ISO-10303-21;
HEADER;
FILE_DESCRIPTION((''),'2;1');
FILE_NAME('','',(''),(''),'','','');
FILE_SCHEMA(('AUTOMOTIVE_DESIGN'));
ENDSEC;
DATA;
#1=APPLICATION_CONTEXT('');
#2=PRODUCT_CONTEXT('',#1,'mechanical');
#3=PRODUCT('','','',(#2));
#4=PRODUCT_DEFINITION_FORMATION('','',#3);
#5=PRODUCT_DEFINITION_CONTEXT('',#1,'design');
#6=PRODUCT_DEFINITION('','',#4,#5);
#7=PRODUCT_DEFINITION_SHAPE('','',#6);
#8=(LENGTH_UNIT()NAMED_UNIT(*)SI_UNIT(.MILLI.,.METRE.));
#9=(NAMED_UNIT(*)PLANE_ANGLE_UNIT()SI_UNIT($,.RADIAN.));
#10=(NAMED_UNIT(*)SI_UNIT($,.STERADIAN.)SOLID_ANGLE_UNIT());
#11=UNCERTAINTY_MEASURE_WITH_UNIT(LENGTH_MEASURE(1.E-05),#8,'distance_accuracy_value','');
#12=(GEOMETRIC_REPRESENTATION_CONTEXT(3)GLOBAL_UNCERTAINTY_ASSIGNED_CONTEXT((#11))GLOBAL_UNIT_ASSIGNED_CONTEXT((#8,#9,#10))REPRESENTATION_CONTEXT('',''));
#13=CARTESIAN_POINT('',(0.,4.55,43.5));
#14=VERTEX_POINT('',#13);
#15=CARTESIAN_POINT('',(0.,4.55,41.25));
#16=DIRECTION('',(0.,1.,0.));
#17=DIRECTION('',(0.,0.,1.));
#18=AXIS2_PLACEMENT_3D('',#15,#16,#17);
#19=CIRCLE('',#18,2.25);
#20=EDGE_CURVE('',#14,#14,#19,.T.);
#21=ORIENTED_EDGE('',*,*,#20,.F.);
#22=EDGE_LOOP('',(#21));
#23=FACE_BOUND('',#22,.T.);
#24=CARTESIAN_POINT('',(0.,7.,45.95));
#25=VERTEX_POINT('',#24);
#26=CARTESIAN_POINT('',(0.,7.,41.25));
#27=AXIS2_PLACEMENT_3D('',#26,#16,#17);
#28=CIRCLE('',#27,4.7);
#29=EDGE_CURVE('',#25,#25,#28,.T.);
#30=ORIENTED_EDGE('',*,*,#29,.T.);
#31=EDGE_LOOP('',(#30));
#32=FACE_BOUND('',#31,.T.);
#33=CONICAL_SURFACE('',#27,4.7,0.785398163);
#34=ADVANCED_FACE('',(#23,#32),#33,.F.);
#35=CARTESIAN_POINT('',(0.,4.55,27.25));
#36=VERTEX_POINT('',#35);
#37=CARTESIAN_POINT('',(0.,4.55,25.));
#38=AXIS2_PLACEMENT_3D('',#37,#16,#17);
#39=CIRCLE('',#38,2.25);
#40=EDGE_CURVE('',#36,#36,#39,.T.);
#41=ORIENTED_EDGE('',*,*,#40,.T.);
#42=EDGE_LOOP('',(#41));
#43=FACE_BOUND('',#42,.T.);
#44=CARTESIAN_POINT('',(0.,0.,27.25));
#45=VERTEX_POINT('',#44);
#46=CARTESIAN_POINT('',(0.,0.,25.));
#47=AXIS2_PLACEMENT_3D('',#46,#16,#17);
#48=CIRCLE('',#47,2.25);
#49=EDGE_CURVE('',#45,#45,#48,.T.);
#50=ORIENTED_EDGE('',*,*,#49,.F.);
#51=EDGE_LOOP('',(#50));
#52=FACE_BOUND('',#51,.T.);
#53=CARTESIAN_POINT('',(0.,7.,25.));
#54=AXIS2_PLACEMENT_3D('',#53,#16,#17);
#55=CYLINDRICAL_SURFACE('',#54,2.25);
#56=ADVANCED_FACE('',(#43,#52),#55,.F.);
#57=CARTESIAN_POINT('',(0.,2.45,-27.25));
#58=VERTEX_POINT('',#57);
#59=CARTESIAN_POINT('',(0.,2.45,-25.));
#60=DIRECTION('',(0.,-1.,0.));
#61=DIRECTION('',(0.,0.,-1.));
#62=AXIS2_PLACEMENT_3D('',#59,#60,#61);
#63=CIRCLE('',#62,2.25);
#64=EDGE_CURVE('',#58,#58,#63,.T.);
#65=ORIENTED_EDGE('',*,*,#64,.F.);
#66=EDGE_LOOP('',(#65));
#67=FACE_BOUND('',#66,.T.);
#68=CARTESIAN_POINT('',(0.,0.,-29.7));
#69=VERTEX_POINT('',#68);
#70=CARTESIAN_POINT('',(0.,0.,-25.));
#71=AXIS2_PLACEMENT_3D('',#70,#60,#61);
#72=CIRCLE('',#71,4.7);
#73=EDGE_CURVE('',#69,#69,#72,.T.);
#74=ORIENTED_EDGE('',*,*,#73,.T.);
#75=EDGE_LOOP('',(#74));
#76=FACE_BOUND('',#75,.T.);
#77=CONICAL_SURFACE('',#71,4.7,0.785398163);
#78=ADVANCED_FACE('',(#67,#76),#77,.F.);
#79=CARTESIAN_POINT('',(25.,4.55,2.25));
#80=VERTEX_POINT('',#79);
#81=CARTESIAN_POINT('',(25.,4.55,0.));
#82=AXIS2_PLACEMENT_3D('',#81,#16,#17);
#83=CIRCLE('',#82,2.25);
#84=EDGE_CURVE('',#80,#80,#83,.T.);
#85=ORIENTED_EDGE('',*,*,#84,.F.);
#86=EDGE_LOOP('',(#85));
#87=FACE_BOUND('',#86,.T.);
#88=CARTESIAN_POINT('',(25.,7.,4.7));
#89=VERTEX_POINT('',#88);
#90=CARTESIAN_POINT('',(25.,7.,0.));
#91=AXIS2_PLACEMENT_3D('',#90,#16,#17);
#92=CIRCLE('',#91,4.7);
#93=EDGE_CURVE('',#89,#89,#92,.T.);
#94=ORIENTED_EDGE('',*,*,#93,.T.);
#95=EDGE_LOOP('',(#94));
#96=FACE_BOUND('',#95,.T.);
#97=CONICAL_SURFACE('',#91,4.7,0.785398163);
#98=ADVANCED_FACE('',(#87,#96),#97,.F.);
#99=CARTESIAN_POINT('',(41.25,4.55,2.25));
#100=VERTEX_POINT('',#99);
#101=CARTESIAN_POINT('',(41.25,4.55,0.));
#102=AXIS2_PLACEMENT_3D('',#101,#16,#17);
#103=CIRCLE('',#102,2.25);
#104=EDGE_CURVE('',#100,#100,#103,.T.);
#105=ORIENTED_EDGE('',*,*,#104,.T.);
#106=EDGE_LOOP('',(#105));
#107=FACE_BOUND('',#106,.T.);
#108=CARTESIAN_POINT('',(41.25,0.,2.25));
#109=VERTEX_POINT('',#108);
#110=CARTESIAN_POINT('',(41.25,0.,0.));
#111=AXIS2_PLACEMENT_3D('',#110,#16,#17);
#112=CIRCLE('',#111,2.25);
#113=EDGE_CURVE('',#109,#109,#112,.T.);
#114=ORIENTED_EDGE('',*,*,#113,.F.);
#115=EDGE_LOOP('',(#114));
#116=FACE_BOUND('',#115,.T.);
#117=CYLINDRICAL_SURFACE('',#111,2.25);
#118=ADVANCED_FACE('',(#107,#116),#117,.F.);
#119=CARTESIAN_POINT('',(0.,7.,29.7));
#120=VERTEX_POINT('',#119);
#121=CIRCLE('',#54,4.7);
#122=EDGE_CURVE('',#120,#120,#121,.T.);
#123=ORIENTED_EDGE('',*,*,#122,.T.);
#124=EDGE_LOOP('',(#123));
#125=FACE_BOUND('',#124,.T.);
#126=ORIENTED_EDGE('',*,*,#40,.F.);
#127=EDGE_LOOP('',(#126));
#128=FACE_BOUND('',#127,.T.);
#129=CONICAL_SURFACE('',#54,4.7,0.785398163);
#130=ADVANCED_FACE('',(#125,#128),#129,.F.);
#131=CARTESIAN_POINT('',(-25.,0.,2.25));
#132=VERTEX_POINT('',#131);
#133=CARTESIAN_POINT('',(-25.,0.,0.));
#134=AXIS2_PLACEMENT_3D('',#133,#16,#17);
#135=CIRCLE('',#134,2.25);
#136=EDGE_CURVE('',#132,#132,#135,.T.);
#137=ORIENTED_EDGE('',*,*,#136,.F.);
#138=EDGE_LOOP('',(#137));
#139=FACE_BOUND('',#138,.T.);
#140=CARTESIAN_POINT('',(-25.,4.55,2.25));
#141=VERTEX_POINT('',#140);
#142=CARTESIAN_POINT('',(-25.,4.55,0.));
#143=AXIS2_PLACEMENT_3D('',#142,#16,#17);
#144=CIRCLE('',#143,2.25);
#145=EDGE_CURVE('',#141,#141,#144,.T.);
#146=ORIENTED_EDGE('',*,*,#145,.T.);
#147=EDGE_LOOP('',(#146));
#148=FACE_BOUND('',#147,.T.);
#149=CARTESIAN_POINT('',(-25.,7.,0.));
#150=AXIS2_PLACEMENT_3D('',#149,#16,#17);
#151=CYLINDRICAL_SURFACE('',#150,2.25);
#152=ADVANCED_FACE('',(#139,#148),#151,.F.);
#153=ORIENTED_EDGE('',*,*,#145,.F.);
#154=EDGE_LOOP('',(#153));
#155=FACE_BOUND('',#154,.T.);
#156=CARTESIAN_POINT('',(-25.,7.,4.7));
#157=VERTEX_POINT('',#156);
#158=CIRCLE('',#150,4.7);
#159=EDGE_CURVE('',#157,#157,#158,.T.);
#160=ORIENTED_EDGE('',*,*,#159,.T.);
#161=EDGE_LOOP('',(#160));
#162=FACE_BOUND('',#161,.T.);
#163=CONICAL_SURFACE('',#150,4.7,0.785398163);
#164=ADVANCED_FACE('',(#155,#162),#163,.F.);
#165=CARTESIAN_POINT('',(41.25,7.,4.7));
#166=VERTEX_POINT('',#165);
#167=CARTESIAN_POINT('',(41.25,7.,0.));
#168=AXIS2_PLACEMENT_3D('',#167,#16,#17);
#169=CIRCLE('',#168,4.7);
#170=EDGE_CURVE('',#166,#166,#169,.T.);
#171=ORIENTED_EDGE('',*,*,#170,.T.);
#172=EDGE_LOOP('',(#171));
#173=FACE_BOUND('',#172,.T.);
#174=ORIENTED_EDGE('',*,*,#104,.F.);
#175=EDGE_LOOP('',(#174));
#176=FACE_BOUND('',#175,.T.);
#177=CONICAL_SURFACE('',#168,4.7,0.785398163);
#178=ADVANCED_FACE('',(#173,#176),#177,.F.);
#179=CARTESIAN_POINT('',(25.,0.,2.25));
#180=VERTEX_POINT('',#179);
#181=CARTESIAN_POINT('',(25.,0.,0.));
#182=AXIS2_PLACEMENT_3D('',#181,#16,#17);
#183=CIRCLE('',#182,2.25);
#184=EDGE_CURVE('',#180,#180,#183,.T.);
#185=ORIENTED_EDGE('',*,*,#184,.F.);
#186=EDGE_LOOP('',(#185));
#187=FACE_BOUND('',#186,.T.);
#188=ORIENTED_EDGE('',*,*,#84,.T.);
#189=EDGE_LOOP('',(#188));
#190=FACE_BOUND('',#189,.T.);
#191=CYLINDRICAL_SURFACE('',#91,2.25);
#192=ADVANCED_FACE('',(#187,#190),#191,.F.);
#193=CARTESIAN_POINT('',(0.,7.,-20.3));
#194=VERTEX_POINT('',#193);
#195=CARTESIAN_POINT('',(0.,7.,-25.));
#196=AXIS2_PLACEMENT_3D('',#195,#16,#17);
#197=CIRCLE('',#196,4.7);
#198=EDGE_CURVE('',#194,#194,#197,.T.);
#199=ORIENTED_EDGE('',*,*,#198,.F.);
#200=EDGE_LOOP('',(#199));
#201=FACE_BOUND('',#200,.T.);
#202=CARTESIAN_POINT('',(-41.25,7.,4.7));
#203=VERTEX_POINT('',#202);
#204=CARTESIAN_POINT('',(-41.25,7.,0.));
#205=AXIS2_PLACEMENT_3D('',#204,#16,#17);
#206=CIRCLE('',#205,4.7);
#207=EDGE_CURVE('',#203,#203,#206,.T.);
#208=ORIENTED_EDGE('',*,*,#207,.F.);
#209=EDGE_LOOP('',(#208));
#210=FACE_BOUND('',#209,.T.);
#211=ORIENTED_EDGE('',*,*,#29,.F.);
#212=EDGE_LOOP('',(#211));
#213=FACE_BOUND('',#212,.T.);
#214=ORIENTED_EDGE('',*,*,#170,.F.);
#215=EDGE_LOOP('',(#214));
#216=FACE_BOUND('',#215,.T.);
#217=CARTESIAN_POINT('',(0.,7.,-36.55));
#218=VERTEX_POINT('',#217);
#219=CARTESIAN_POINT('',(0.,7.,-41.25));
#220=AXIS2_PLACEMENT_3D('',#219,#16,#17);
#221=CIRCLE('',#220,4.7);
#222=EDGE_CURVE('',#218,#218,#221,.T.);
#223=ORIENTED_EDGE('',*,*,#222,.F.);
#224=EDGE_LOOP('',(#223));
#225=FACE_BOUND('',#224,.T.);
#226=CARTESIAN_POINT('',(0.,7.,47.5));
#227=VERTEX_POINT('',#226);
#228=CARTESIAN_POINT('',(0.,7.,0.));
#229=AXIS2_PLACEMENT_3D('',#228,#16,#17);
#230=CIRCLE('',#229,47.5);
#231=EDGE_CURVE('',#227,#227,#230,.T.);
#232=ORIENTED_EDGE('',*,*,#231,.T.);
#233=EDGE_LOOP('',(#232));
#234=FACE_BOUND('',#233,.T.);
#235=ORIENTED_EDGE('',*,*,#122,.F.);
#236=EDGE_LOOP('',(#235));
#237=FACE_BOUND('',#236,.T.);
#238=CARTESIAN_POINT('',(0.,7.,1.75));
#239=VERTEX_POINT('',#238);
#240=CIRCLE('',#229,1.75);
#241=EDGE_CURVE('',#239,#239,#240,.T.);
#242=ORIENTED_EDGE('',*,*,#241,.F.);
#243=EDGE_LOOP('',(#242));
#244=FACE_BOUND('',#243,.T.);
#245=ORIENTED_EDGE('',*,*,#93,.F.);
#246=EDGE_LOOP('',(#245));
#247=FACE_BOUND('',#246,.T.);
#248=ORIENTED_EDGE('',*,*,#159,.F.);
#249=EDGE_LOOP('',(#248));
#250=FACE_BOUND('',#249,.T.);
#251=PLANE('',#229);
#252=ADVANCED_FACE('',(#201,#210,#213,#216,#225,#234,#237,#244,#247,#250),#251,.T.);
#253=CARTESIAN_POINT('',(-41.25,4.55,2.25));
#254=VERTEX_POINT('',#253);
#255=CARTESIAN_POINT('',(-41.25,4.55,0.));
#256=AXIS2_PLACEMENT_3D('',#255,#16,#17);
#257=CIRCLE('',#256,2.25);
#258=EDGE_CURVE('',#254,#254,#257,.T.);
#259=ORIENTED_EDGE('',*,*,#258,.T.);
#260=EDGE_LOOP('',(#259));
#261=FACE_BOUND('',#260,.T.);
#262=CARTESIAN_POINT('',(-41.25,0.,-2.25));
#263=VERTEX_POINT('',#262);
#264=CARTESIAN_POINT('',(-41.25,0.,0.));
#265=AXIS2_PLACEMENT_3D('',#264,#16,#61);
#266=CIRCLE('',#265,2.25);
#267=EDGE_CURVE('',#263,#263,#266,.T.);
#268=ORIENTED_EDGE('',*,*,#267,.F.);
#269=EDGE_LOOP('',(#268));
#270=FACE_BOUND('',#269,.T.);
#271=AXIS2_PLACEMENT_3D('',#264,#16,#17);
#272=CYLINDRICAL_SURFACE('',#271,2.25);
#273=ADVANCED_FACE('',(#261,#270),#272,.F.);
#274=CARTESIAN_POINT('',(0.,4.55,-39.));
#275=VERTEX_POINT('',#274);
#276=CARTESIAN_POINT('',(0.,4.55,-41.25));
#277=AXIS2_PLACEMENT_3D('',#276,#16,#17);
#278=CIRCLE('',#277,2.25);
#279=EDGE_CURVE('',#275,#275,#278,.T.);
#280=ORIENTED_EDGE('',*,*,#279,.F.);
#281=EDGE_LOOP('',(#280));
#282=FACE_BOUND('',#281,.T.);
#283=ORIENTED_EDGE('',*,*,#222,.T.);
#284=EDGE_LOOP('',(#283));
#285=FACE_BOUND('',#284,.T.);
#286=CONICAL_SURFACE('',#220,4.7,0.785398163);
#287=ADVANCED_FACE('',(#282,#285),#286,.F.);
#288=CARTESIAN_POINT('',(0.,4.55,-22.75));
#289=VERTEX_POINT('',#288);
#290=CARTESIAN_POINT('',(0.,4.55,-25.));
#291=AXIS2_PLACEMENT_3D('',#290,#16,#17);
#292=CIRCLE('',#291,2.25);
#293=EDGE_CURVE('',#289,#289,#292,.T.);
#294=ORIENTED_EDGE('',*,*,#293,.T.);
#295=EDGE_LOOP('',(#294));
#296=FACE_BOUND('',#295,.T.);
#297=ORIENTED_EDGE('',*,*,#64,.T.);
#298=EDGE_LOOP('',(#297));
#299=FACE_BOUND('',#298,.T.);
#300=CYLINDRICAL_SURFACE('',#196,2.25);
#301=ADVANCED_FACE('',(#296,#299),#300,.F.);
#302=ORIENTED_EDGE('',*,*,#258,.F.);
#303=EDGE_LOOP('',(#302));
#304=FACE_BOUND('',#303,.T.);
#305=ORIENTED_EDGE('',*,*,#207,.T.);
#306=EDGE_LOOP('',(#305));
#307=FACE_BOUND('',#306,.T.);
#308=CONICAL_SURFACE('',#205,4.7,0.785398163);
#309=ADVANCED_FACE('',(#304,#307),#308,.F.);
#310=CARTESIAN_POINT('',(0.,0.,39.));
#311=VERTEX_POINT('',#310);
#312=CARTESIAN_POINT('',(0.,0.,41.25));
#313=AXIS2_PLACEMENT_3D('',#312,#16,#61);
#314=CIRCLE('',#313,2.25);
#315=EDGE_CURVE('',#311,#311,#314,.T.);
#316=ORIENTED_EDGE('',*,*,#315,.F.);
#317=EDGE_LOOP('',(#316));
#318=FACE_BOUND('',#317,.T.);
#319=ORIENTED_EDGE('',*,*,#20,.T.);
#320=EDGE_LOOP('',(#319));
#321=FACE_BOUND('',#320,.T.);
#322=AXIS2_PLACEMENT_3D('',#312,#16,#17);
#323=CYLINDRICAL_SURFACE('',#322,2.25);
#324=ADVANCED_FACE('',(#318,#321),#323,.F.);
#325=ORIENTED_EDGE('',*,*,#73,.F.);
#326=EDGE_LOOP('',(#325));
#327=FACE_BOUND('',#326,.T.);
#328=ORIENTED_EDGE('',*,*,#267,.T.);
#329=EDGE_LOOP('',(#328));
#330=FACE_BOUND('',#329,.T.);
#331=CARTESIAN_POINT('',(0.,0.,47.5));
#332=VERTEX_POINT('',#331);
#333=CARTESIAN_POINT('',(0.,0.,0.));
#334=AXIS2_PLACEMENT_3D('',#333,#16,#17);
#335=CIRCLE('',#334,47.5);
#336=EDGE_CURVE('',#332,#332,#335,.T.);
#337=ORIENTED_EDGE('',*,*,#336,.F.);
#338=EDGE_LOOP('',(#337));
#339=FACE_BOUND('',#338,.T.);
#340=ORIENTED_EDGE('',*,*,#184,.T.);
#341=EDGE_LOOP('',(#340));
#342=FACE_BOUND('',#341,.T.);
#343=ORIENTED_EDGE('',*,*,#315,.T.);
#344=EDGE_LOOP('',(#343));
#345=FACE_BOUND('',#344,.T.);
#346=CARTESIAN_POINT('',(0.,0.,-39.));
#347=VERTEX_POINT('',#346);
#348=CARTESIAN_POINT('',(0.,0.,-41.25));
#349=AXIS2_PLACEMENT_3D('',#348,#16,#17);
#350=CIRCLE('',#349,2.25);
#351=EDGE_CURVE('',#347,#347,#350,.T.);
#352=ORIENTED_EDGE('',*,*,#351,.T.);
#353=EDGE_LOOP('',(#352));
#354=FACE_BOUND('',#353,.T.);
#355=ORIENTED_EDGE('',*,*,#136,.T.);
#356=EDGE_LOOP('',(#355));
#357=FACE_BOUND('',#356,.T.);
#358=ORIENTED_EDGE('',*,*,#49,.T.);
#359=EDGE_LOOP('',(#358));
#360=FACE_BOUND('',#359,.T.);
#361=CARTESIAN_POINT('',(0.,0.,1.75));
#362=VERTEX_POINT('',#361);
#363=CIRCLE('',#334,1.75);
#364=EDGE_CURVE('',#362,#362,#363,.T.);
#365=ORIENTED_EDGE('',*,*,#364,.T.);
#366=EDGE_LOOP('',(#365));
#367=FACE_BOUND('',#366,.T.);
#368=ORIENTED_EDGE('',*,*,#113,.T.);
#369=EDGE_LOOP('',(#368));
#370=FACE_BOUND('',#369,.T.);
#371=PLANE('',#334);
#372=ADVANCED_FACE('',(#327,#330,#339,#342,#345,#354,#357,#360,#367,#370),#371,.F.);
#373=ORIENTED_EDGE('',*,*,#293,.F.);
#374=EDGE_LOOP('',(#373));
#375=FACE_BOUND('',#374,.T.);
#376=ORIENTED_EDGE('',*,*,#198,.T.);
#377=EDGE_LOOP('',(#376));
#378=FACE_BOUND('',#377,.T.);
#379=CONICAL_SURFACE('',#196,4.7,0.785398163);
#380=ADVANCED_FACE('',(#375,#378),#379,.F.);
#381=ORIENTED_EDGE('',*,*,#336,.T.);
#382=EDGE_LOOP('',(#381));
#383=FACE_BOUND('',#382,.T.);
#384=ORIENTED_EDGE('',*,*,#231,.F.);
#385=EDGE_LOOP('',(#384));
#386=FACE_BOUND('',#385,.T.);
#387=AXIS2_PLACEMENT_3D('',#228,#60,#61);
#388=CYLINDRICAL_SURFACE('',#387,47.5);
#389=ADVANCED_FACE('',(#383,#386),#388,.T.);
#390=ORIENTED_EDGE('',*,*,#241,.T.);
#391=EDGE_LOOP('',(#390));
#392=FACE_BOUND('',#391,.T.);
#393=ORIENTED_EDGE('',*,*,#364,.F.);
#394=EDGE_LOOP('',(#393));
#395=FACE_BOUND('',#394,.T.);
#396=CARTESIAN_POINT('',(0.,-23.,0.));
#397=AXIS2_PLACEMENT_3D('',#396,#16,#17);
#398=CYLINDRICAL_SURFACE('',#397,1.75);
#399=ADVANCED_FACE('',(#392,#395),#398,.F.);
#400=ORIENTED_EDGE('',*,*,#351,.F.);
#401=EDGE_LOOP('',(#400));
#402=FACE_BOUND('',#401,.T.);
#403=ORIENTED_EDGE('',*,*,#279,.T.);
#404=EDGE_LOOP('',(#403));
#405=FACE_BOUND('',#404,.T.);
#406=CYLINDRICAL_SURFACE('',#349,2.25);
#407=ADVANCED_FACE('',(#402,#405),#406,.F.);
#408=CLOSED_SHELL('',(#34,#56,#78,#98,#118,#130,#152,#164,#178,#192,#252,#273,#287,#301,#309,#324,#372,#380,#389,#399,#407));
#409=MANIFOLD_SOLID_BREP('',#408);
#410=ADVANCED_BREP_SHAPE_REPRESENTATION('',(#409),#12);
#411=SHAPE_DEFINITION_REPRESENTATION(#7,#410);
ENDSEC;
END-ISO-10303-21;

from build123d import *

# Parameters (mm, degrees)
SKETCH1_R                                           = 47.5
SKETCH1_R_2                                         = 35
BOSS_EXTRUDE1_DEPTH                                 = 7
SKETCH2_R                                           = 2.25
SKETCH2_R_2                                         = 1.75
CUT_EXTRUDE1_DEPTH                                  = 68.538877693
CSK_FOR_M4_COUNTERSUNK_FLAT_HEAD_SCREW1_D           = 4.5
CSK_FOR_M4_COUNTERSUNK_FLAT_HEAD_SCREW1_CSINK_D     = 9.4
CSK_FOR_M4_COUNTERSUNK_FLAT_HEAD_SCREW1_CSINK_ANGLE = 90
BOSS_EXTRUDE2_START                                 = -7
SKETCH4_R                                           = 35
BOSS_EXTRUDE2_DEPTH                                 = 7
SKETCH6_R                                           = 1.75
CUT_EXTRUDE2_DEPTH                                  = 30
SKETCH2_2_R                                         = 2.25
SKETCH2_2_R_2                                       = 1.75
CUT_EXTRUDE3_DEPTH                                  = 68.538877693


# Read off the part's stored shape, not the designer's step: CSK for M4 Countersunk Flat Head Screw2
with BuildPart() as part:
    # Sketch1 → Boss-Extrude1 (new body)
    with BuildSketch(Plane(origin=(0, 0, 0), x_dir=(1, 0, 0), z_dir=(0, 1, 0))):
        with Locations(Location((0, 0, 0), (0, 0, 270))):
            Circle(SKETCH1_R)
        with Locations(Location((0, 0, 0), (0, 0, 270))):
            Circle(SKETCH1_R_2, mode=Mode.SUBTRACT)
    extrude(amount=BOSS_EXTRUDE1_DEPTH)

    # Sketch2 → Cut-Extrude1 (cut, through all)
    with BuildSketch(Plane(origin=(0, 7, 0), x_dir=(1, 0, 0), z_dir=(0, 1, 0))):
        with Locations(Location((0, 41.25, 0), (0, 0, 270))):
            Circle(SKETCH2_R)
        with Locations(Location((41.25, 0, 0), (0, 0, 270))):
            Circle(SKETCH2_R)
        with Locations(Location((0, -41.25, 0), (0, 0, 90))):
            Circle(SKETCH2_R)
        with Locations(Location((-41.25, 0, 0), (0, 0, 90))):
            Circle(SKETCH2_R)
        with Locations((0, 25)):
            Circle(SKETCH2_R_2)
        with Locations((25, 0)):
            Circle(SKETCH2_R_2)
        with Locations((0, -25)):
            Circle(SKETCH2_R_2)
        with Locations((-25, 0)):
            Circle(SKETCH2_R_2)
    extrude(amount=-CUT_EXTRUDE1_DEPTH, mode=Mode.SUBTRACT)

    # CSK for M4 Countersunk Flat Head Screw1 (through all)
    with Locations(Plane(origin=(0, 7, 41.25), x_dir=(0, 0, 1), z_dir=(0, 1, 0))):
        with Locations((0, 0), (-41.25, 41.25), (-82.5, 0), (-41.25, -41.25)):
            CounterSinkHole(CSK_FOR_M4_COUNTERSUNK_FLAT_HEAD_SCREW1_D / 2, CSK_FOR_M4_COUNTERSUNK_FLAT_HEAD_SCREW1_CSINK_D / 2, counter_sink_angle=CSK_FOR_M4_COUNTERSUNK_FLAT_HEAD_SCREW1_CSINK_ANGLE)

    # Sketch4 → Boss-Extrude2 (add)
    with BuildSketch(Plane(origin=(0, 7, 0), x_dir=(1, 0, 0), z_dir=(0, 1, 0)).offset(BOSS_EXTRUDE2_START)):
        Circle(SKETCH4_R)
    extrude(amount=BOSS_EXTRUDE2_DEPTH)

    # Sketch6 → Cut-Extrude2 (cut)
    with BuildSketch(Plane(origin=(0, 7, 0), x_dir=(1, 0, 0), z_dir=(0, 1, 0))):
        with Locations(Location((0, 0, 0), (0, 0, 270))):
            Circle(SKETCH6_R)
    extrude(amount=-CUT_EXTRUDE2_DEPTH, mode=Mode.SUBTRACT)

    # Sketch2<2> → Cut-Extrude3 (cut, through all)
    with BuildSketch(Plane(origin=(0, 7, 0), x_dir=(1, 0, 0), z_dir=(0, 1, 0))):
        with Locations(Location((0, 41.25, 0), (0, 0, 270))):
            Circle(SKETCH2_2_R)
        with Locations(Location((41.25, 0, 0), (0, 0, 270))):
            Circle(SKETCH2_2_R)
        with Locations(Location((0, -41.25, 0), (0, 0, 270))):
            Circle(SKETCH2_2_R)
        with Locations(Location((-41.25, 0, 0), (0, 0, 270))):
            Circle(SKETCH2_2_R)
        with Locations(Location((0, 25, 0), (0, 0, 270))):
            Circle(SKETCH2_2_R_2)
        with Locations(Location((25, 0, 0), (0, 0, 270))):
            Circle(SKETCH2_2_R_2)
        with Locations(Location((0, -25, 0), (0, 0, 270))):
            Circle(SKETCH2_2_R_2)
        with Locations(Location((-25, 0, 0), (0, 0, 270))):
            Circle(SKETCH2_2_R_2)
    extrude(amount=-CUT_EXTRUDE3_DEPTH, mode=Mode.SUBTRACT)

    # CSK for M4 Countersunk Flat Head Scr 2 → CSK for M4 Countersunk Flat Head Screw2 (revolve, cut)
    with BuildSketch(Plane.XY.offset(-25)):
        Polygon((1.75, 0), (4.7, 0), (2.25, 2.45), (2.25, 4.55), (4.7, 7), (1.75, 7), align=None)
    revolve(axis=Axis((0, 0, -25), (0, 1, 0)), mode=Mode.SUBTRACT)

    # CSK for M4 Countersunk Flat Head Scr 3 o → CSK for M4 Countersunk Flat Head Scr 3 (revolve, cut)
    with BuildSketch(Plane(origin=(25, 0, 0), x_dir=(1, 0, 0), z_dir=(0, 0, 1))):
        Polygon((1.75, 0), (2.25, 0), (2.25, 4.55), (4.7, 7), (1.75, 7), align=None)
    revolve(axis=Axis((25, 0, 0), (0, 1, 0)), mode=Mode.SUBTRACT)

    # CSK for M4 Countersunk Flat Head Scr 4 o → CSK for M4 Countersunk Flat Head Scr 4 (revolve, cut)
    with BuildSketch(Plane.XY.offset(25)):
        Polygon((1.75, 0), (2.25, 0), (2.25, 4.55), (4.7, 7), (1.75, 7), align=None)
    revolve(axis=Axis((0, 0, 25), (0, 1, 0)), mode=Mode.SUBTRACT)

    # CSK for M4 Countersunk Flat Head Scr 5 o → CSK for M4 Countersunk Flat Head Scr 5 (revolve, cut)
    with BuildSketch(Plane(origin=(-25, 0, 0), x_dir=(1, 0, 0), z_dir=(0, 0, 1))):
        Polygon((1.75, 0), (2.25, 0), (2.25, 4.55), (4.7, 7), (1.75, 7), align=None)
    revolve(axis=Axis((-25, 0, 0), (0, 1, 0)), mode=Mode.SUBTRACT)


solid = part.part
